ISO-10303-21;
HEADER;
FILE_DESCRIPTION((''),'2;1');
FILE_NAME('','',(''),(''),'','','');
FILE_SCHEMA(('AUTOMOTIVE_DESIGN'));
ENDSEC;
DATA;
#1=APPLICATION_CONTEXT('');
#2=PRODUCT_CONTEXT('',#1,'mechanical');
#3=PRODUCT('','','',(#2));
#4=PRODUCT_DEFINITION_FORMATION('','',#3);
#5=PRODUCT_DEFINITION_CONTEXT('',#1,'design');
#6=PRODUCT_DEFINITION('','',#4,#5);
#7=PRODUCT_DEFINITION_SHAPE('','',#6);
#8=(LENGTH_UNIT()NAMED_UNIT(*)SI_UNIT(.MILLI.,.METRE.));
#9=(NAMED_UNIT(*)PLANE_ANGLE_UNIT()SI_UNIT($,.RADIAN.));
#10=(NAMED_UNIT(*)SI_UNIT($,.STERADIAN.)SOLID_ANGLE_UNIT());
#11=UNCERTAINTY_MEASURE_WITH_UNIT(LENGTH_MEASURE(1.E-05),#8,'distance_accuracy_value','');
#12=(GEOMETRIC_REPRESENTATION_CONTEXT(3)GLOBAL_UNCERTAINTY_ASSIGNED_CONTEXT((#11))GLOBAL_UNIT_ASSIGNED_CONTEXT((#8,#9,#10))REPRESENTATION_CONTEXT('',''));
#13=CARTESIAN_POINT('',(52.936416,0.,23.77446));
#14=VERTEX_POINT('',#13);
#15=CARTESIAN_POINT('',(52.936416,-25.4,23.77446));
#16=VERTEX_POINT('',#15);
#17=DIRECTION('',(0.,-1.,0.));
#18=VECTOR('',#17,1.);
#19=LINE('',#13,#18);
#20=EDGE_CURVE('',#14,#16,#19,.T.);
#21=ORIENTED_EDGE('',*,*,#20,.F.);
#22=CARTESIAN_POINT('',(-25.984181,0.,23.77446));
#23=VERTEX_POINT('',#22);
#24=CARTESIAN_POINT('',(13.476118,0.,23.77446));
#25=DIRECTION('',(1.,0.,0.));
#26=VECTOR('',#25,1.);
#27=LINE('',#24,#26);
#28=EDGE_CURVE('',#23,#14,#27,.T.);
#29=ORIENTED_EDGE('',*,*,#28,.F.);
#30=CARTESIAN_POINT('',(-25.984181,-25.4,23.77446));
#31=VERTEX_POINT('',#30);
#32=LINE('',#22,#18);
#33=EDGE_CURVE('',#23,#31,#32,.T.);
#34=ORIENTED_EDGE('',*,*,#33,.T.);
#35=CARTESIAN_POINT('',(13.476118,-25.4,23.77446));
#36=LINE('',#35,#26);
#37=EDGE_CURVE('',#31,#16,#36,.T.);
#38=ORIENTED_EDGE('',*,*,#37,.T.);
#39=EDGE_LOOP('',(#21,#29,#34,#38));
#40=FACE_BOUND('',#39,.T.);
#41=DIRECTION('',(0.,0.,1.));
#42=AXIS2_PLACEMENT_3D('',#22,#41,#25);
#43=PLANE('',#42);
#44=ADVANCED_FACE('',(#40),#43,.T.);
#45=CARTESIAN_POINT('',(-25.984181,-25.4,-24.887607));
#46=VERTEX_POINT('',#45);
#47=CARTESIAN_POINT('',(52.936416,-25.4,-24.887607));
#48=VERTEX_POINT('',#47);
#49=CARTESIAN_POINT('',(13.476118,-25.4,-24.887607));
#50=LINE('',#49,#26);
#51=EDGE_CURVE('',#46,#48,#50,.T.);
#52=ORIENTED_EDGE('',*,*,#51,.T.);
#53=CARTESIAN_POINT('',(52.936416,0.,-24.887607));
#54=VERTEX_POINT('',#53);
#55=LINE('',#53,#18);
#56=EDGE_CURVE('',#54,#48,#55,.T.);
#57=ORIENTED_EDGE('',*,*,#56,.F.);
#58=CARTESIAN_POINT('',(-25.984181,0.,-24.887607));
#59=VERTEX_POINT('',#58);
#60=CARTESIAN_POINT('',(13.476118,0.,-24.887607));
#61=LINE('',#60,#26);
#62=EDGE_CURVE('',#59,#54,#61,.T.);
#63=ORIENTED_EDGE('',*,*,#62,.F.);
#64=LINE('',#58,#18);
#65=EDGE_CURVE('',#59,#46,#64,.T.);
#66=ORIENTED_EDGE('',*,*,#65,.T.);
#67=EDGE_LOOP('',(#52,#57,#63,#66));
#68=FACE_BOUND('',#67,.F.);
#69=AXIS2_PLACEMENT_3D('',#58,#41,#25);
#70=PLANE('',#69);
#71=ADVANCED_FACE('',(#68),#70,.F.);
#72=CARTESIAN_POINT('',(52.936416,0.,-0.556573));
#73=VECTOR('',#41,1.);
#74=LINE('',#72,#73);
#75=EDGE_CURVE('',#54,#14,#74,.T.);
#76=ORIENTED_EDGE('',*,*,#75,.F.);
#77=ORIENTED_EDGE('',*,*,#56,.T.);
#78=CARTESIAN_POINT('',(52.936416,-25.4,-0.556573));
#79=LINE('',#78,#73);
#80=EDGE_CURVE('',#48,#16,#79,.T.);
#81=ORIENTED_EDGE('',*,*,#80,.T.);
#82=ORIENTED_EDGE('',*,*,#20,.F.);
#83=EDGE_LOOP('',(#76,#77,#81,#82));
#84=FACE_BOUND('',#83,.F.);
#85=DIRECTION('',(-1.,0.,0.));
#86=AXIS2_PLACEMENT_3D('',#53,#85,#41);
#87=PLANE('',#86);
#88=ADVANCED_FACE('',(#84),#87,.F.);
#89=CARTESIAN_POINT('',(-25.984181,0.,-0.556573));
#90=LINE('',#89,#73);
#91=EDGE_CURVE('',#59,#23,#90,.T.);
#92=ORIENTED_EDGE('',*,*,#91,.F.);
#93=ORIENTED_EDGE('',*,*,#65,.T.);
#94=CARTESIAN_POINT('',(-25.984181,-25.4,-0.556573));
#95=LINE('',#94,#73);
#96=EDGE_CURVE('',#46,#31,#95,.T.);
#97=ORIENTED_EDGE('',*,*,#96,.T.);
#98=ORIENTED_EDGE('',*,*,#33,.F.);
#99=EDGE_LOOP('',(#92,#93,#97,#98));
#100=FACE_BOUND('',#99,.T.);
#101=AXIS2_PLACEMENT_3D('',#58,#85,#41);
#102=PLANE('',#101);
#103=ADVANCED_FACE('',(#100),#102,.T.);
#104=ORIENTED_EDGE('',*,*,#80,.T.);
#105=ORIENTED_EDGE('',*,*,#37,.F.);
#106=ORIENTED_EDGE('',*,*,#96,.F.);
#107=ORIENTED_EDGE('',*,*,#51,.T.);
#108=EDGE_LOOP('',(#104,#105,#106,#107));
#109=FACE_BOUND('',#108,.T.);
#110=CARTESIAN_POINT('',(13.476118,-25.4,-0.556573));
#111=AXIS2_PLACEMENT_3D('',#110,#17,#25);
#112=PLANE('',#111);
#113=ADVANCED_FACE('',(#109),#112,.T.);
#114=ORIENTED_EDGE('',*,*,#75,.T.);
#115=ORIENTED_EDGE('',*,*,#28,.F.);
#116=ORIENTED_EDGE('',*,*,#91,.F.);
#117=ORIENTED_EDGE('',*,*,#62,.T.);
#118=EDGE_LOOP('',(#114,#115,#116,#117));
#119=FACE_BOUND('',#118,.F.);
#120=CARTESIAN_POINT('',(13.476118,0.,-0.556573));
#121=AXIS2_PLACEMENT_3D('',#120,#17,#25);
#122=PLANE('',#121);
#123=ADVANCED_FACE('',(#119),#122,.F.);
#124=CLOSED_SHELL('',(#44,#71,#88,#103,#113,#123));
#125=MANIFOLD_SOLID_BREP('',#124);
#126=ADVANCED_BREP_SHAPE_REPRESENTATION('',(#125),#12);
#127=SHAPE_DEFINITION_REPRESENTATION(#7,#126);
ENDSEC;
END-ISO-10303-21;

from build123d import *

# Parameters (mm, degrees)
F0_W     = 78.9205972105
F0_H     = 48.6620664597
F1_DEPTH = 25.4


# Not quite as in the source:
# - a feature of the source that left no trace in its solid (it failed there, or was rolled back) is left out


with BuildPart() as f1:
    # F0 (on Front) → F1 (new body)
    with BuildSketch(Plane.XZ):
        with Locations((13.4761175141, -0.5565732718)):
            Rectangle(F0_W, F0_H)
    extrude(amount=F1_DEPTH)


solid = f1.part
